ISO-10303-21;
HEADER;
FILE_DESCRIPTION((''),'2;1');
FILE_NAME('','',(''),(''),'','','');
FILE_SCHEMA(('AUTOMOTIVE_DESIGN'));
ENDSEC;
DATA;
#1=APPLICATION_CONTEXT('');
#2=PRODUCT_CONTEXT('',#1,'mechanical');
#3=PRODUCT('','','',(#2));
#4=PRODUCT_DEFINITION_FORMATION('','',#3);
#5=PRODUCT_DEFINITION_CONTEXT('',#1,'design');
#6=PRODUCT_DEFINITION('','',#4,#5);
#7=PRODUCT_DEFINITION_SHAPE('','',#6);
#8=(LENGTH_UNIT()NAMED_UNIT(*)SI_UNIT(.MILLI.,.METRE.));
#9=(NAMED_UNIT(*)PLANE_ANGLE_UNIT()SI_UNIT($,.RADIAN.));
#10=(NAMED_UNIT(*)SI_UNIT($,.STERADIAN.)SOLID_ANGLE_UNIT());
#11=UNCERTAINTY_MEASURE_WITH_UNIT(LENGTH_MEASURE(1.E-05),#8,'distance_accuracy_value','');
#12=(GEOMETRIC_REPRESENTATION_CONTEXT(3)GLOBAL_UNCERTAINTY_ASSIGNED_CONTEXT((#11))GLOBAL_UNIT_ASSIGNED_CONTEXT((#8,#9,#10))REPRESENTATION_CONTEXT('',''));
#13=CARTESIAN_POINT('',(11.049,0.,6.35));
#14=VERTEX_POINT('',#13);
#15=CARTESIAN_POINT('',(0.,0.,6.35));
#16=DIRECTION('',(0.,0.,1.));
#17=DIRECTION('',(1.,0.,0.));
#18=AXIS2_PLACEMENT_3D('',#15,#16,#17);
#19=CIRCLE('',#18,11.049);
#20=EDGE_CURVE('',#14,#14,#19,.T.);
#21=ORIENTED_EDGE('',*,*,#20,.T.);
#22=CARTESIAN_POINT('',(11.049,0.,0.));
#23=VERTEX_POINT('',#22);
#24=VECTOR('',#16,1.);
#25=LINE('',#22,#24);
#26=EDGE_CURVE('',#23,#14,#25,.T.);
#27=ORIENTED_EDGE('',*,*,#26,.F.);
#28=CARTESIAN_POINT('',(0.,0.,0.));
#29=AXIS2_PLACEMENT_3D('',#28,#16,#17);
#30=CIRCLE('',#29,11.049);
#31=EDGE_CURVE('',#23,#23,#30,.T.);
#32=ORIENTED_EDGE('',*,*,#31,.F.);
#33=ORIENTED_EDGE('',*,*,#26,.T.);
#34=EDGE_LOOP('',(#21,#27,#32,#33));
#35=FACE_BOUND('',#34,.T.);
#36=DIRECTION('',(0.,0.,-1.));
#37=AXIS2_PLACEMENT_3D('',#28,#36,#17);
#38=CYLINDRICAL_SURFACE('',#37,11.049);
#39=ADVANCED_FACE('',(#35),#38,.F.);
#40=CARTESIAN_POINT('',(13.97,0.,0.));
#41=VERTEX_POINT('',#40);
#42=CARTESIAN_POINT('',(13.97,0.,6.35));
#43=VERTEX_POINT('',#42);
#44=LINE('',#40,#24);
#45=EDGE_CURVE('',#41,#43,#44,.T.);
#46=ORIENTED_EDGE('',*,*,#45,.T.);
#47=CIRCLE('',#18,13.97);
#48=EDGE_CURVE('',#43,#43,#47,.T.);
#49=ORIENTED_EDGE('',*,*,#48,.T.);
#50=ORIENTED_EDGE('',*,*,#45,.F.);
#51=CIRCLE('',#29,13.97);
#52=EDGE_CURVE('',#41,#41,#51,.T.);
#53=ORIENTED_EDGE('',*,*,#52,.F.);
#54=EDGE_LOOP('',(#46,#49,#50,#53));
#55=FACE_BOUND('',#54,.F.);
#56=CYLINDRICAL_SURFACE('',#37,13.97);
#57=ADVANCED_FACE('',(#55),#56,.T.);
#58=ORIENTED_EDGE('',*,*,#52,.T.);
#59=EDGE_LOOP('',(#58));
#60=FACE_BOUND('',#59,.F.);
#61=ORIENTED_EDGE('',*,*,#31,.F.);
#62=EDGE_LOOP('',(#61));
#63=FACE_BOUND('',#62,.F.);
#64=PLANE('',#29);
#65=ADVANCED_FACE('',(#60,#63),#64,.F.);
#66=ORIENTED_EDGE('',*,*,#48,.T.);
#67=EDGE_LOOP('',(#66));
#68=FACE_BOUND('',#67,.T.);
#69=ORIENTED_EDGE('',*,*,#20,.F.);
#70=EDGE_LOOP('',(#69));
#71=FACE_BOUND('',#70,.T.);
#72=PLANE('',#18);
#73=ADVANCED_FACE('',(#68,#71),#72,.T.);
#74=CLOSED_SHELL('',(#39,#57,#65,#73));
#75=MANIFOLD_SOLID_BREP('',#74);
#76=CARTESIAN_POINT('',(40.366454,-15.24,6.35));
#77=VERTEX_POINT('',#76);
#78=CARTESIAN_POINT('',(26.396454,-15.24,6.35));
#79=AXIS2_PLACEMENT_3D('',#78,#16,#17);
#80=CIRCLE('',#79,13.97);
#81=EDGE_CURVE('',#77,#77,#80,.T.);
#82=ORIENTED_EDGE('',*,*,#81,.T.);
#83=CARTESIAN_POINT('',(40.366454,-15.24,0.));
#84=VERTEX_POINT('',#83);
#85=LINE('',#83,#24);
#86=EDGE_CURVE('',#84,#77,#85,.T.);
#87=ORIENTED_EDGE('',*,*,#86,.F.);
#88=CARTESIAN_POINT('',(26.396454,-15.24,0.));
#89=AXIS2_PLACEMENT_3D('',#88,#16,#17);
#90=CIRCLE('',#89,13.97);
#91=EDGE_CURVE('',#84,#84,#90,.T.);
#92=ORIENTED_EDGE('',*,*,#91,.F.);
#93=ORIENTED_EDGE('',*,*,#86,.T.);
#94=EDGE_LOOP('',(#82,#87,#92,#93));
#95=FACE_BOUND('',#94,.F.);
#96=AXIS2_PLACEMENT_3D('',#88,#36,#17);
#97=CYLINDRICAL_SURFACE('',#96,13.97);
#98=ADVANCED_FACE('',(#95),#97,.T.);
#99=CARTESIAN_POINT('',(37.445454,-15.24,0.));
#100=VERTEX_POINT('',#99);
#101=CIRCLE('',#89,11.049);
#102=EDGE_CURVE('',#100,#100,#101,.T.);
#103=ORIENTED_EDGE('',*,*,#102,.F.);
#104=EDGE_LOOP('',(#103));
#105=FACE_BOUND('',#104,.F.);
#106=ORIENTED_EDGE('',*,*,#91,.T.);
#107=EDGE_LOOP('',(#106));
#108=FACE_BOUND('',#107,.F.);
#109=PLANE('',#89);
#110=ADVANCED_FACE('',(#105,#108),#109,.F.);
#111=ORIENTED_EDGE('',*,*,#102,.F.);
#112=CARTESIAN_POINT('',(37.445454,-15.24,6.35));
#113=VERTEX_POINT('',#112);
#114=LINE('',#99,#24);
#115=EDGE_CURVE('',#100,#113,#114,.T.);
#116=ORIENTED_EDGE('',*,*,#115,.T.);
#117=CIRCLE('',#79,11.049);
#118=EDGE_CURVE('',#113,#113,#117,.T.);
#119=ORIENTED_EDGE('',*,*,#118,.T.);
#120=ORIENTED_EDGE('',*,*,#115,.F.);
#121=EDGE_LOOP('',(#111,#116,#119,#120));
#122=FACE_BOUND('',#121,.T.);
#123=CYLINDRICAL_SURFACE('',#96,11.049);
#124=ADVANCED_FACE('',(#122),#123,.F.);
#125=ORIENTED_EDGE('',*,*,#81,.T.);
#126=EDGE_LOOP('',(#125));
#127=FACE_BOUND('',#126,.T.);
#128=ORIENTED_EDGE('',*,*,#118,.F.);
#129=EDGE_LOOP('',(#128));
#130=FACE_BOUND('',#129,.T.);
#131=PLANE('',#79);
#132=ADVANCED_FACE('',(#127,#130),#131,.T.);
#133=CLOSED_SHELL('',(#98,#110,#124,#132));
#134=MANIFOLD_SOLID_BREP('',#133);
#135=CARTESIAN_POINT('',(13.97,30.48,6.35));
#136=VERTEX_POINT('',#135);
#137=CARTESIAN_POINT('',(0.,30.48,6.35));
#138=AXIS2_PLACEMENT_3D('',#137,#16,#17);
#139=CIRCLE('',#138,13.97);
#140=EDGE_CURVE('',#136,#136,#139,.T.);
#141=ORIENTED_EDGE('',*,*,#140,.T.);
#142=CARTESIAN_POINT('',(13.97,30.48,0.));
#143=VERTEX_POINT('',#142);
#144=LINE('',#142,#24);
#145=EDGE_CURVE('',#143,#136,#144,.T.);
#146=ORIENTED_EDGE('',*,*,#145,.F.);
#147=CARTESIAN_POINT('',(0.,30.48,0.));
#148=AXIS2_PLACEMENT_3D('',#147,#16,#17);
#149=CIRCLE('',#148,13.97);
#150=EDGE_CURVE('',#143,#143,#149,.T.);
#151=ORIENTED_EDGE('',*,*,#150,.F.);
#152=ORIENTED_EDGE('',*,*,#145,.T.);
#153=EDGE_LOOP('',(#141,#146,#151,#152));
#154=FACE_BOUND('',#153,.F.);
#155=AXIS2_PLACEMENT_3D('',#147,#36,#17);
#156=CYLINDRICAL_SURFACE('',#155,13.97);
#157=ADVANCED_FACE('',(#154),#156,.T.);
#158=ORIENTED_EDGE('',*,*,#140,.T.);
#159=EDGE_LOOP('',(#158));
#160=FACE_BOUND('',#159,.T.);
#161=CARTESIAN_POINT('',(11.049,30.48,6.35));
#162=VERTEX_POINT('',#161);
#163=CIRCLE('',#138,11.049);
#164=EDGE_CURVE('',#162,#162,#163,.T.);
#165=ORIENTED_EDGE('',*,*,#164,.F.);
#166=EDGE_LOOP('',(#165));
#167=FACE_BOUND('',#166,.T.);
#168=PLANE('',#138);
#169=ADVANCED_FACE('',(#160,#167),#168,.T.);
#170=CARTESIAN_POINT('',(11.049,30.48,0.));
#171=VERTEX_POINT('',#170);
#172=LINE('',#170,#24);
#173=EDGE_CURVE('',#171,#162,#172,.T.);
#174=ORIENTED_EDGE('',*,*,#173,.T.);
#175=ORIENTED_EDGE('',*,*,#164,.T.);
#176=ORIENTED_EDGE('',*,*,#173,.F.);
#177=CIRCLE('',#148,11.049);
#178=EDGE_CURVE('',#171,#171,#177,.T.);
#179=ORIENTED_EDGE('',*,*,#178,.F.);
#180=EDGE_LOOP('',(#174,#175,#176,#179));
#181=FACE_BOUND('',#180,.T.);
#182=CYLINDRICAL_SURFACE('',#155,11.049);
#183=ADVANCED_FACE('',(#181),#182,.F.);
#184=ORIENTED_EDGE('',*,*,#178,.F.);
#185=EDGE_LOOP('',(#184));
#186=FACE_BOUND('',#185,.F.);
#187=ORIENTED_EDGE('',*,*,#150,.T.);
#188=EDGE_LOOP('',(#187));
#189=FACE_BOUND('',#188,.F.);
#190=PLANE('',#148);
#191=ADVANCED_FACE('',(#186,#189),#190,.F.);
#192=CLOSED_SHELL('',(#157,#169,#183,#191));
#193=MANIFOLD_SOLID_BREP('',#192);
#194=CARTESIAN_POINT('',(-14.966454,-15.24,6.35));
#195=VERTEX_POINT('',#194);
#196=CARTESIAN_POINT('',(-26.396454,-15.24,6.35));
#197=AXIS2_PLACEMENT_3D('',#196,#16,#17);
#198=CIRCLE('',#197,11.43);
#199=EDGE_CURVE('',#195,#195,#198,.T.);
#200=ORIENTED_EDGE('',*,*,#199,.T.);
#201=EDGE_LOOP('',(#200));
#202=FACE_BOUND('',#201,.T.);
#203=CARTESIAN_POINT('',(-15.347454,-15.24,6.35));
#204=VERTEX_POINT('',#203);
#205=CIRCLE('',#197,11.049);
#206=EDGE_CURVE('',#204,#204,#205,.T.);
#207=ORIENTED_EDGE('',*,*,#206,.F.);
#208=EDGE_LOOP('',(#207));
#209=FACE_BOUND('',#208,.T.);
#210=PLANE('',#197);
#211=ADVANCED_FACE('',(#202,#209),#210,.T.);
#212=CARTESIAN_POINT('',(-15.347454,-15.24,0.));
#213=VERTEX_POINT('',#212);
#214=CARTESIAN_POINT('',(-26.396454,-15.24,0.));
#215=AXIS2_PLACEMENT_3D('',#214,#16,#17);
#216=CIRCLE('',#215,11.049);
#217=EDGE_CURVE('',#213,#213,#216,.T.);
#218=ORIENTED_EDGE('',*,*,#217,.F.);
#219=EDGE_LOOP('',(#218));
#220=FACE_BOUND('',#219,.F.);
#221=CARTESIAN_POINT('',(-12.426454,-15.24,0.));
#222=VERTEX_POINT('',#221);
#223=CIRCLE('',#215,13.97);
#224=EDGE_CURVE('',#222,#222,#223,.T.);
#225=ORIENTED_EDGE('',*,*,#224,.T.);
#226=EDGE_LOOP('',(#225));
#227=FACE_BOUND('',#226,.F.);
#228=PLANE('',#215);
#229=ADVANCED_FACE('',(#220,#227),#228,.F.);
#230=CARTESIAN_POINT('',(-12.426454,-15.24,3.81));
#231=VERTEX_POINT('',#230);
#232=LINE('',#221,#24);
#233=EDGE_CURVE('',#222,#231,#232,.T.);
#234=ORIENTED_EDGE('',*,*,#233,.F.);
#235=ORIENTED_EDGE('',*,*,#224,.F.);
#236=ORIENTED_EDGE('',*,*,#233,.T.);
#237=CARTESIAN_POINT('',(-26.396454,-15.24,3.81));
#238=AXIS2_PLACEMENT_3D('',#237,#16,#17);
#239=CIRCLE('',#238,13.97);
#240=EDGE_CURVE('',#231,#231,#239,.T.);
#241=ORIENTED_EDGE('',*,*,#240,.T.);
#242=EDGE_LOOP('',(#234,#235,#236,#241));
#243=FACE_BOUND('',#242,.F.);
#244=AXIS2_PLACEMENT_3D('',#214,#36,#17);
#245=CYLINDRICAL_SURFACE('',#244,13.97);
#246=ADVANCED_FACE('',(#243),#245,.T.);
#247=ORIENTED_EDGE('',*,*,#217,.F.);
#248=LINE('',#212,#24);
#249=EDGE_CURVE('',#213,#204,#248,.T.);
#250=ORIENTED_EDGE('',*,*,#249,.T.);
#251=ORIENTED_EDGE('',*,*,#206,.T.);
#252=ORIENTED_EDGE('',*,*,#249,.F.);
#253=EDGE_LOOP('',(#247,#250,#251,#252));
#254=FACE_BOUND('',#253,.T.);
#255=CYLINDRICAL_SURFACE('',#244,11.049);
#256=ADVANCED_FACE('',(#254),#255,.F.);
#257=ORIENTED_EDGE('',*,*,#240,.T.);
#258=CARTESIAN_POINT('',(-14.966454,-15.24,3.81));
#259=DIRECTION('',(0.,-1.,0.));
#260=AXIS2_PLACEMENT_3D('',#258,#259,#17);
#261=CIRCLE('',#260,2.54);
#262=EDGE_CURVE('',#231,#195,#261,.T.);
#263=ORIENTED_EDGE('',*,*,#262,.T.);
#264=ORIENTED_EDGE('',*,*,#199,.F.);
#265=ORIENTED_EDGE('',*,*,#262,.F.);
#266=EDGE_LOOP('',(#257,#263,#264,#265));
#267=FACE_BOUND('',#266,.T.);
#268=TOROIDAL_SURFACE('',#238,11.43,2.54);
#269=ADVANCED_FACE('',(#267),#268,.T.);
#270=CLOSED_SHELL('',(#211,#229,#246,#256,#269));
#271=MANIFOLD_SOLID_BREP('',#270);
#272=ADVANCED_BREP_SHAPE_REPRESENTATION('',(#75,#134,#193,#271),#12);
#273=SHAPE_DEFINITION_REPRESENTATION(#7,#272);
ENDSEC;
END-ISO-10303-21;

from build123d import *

# Parameters (mm, degrees)
F0_R     = 13.97
F0_R_2   = 11.049
F2_DEPTH = 6.35
F4_R     = 2.54


# Not quite as in the source:
# - a feature of the source that left no trace in its solid (it failed there, or was rolled back) is left out


with BuildPart() as f2:
    # F0 (on Top) → F2 (new body)
    with BuildSketch(Plane.XY):
        with Locations((0, 30.48)):
            Circle(F0_R)
        with Locations((0, 30.48)):
            Circle(F0_R_2, mode=Mode.SUBTRACT)
    extrude(amount=F2_DEPTH)


with BuildPart() as f2b:
    # F0 (on Top) → F2, piece 2 (new body)
    with BuildSketch(Plane.XY):
        Circle(F0_R)
        Circle(F0_R_2, mode=Mode.SUBTRACT)
    extrude(amount=F2_DEPTH)


with BuildPart() as f2c:
    # F0 (on Top) → F2, piece 3 (new body)
    with BuildSketch(Plane.XY):
        with Locations((26.3964543073, -15.24)):
            Circle(F0_R)
        with Locations((26.3964543073, -15.24)):
            Circle(F0_R_2, mode=Mode.SUBTRACT)
    extrude(amount=F2_DEPTH)


with BuildPart() as f2d:
    # F0 (on Top) → F2, piece 4 (new body)
    with BuildSketch(Plane.XY):
        with Locations((-26.3964543073, -15.24)):
            Circle(F0_R)
        with Locations((-26.3964543073, -15.24)):
            Circle(F0_R_2, mode=Mode.SUBTRACT)
    extrude(amount=F2_DEPTH)

    # F4
    f4_edges = [f2d.edges().sort_by_distance(p)[0] for p in [
        (-40.366454, -15.24, 6.35),
    ]]
    fillet(f4_edges, radius=F4_R)


solid = Compound([f2.part, f2b.part, f2c.part, f2d.part])
